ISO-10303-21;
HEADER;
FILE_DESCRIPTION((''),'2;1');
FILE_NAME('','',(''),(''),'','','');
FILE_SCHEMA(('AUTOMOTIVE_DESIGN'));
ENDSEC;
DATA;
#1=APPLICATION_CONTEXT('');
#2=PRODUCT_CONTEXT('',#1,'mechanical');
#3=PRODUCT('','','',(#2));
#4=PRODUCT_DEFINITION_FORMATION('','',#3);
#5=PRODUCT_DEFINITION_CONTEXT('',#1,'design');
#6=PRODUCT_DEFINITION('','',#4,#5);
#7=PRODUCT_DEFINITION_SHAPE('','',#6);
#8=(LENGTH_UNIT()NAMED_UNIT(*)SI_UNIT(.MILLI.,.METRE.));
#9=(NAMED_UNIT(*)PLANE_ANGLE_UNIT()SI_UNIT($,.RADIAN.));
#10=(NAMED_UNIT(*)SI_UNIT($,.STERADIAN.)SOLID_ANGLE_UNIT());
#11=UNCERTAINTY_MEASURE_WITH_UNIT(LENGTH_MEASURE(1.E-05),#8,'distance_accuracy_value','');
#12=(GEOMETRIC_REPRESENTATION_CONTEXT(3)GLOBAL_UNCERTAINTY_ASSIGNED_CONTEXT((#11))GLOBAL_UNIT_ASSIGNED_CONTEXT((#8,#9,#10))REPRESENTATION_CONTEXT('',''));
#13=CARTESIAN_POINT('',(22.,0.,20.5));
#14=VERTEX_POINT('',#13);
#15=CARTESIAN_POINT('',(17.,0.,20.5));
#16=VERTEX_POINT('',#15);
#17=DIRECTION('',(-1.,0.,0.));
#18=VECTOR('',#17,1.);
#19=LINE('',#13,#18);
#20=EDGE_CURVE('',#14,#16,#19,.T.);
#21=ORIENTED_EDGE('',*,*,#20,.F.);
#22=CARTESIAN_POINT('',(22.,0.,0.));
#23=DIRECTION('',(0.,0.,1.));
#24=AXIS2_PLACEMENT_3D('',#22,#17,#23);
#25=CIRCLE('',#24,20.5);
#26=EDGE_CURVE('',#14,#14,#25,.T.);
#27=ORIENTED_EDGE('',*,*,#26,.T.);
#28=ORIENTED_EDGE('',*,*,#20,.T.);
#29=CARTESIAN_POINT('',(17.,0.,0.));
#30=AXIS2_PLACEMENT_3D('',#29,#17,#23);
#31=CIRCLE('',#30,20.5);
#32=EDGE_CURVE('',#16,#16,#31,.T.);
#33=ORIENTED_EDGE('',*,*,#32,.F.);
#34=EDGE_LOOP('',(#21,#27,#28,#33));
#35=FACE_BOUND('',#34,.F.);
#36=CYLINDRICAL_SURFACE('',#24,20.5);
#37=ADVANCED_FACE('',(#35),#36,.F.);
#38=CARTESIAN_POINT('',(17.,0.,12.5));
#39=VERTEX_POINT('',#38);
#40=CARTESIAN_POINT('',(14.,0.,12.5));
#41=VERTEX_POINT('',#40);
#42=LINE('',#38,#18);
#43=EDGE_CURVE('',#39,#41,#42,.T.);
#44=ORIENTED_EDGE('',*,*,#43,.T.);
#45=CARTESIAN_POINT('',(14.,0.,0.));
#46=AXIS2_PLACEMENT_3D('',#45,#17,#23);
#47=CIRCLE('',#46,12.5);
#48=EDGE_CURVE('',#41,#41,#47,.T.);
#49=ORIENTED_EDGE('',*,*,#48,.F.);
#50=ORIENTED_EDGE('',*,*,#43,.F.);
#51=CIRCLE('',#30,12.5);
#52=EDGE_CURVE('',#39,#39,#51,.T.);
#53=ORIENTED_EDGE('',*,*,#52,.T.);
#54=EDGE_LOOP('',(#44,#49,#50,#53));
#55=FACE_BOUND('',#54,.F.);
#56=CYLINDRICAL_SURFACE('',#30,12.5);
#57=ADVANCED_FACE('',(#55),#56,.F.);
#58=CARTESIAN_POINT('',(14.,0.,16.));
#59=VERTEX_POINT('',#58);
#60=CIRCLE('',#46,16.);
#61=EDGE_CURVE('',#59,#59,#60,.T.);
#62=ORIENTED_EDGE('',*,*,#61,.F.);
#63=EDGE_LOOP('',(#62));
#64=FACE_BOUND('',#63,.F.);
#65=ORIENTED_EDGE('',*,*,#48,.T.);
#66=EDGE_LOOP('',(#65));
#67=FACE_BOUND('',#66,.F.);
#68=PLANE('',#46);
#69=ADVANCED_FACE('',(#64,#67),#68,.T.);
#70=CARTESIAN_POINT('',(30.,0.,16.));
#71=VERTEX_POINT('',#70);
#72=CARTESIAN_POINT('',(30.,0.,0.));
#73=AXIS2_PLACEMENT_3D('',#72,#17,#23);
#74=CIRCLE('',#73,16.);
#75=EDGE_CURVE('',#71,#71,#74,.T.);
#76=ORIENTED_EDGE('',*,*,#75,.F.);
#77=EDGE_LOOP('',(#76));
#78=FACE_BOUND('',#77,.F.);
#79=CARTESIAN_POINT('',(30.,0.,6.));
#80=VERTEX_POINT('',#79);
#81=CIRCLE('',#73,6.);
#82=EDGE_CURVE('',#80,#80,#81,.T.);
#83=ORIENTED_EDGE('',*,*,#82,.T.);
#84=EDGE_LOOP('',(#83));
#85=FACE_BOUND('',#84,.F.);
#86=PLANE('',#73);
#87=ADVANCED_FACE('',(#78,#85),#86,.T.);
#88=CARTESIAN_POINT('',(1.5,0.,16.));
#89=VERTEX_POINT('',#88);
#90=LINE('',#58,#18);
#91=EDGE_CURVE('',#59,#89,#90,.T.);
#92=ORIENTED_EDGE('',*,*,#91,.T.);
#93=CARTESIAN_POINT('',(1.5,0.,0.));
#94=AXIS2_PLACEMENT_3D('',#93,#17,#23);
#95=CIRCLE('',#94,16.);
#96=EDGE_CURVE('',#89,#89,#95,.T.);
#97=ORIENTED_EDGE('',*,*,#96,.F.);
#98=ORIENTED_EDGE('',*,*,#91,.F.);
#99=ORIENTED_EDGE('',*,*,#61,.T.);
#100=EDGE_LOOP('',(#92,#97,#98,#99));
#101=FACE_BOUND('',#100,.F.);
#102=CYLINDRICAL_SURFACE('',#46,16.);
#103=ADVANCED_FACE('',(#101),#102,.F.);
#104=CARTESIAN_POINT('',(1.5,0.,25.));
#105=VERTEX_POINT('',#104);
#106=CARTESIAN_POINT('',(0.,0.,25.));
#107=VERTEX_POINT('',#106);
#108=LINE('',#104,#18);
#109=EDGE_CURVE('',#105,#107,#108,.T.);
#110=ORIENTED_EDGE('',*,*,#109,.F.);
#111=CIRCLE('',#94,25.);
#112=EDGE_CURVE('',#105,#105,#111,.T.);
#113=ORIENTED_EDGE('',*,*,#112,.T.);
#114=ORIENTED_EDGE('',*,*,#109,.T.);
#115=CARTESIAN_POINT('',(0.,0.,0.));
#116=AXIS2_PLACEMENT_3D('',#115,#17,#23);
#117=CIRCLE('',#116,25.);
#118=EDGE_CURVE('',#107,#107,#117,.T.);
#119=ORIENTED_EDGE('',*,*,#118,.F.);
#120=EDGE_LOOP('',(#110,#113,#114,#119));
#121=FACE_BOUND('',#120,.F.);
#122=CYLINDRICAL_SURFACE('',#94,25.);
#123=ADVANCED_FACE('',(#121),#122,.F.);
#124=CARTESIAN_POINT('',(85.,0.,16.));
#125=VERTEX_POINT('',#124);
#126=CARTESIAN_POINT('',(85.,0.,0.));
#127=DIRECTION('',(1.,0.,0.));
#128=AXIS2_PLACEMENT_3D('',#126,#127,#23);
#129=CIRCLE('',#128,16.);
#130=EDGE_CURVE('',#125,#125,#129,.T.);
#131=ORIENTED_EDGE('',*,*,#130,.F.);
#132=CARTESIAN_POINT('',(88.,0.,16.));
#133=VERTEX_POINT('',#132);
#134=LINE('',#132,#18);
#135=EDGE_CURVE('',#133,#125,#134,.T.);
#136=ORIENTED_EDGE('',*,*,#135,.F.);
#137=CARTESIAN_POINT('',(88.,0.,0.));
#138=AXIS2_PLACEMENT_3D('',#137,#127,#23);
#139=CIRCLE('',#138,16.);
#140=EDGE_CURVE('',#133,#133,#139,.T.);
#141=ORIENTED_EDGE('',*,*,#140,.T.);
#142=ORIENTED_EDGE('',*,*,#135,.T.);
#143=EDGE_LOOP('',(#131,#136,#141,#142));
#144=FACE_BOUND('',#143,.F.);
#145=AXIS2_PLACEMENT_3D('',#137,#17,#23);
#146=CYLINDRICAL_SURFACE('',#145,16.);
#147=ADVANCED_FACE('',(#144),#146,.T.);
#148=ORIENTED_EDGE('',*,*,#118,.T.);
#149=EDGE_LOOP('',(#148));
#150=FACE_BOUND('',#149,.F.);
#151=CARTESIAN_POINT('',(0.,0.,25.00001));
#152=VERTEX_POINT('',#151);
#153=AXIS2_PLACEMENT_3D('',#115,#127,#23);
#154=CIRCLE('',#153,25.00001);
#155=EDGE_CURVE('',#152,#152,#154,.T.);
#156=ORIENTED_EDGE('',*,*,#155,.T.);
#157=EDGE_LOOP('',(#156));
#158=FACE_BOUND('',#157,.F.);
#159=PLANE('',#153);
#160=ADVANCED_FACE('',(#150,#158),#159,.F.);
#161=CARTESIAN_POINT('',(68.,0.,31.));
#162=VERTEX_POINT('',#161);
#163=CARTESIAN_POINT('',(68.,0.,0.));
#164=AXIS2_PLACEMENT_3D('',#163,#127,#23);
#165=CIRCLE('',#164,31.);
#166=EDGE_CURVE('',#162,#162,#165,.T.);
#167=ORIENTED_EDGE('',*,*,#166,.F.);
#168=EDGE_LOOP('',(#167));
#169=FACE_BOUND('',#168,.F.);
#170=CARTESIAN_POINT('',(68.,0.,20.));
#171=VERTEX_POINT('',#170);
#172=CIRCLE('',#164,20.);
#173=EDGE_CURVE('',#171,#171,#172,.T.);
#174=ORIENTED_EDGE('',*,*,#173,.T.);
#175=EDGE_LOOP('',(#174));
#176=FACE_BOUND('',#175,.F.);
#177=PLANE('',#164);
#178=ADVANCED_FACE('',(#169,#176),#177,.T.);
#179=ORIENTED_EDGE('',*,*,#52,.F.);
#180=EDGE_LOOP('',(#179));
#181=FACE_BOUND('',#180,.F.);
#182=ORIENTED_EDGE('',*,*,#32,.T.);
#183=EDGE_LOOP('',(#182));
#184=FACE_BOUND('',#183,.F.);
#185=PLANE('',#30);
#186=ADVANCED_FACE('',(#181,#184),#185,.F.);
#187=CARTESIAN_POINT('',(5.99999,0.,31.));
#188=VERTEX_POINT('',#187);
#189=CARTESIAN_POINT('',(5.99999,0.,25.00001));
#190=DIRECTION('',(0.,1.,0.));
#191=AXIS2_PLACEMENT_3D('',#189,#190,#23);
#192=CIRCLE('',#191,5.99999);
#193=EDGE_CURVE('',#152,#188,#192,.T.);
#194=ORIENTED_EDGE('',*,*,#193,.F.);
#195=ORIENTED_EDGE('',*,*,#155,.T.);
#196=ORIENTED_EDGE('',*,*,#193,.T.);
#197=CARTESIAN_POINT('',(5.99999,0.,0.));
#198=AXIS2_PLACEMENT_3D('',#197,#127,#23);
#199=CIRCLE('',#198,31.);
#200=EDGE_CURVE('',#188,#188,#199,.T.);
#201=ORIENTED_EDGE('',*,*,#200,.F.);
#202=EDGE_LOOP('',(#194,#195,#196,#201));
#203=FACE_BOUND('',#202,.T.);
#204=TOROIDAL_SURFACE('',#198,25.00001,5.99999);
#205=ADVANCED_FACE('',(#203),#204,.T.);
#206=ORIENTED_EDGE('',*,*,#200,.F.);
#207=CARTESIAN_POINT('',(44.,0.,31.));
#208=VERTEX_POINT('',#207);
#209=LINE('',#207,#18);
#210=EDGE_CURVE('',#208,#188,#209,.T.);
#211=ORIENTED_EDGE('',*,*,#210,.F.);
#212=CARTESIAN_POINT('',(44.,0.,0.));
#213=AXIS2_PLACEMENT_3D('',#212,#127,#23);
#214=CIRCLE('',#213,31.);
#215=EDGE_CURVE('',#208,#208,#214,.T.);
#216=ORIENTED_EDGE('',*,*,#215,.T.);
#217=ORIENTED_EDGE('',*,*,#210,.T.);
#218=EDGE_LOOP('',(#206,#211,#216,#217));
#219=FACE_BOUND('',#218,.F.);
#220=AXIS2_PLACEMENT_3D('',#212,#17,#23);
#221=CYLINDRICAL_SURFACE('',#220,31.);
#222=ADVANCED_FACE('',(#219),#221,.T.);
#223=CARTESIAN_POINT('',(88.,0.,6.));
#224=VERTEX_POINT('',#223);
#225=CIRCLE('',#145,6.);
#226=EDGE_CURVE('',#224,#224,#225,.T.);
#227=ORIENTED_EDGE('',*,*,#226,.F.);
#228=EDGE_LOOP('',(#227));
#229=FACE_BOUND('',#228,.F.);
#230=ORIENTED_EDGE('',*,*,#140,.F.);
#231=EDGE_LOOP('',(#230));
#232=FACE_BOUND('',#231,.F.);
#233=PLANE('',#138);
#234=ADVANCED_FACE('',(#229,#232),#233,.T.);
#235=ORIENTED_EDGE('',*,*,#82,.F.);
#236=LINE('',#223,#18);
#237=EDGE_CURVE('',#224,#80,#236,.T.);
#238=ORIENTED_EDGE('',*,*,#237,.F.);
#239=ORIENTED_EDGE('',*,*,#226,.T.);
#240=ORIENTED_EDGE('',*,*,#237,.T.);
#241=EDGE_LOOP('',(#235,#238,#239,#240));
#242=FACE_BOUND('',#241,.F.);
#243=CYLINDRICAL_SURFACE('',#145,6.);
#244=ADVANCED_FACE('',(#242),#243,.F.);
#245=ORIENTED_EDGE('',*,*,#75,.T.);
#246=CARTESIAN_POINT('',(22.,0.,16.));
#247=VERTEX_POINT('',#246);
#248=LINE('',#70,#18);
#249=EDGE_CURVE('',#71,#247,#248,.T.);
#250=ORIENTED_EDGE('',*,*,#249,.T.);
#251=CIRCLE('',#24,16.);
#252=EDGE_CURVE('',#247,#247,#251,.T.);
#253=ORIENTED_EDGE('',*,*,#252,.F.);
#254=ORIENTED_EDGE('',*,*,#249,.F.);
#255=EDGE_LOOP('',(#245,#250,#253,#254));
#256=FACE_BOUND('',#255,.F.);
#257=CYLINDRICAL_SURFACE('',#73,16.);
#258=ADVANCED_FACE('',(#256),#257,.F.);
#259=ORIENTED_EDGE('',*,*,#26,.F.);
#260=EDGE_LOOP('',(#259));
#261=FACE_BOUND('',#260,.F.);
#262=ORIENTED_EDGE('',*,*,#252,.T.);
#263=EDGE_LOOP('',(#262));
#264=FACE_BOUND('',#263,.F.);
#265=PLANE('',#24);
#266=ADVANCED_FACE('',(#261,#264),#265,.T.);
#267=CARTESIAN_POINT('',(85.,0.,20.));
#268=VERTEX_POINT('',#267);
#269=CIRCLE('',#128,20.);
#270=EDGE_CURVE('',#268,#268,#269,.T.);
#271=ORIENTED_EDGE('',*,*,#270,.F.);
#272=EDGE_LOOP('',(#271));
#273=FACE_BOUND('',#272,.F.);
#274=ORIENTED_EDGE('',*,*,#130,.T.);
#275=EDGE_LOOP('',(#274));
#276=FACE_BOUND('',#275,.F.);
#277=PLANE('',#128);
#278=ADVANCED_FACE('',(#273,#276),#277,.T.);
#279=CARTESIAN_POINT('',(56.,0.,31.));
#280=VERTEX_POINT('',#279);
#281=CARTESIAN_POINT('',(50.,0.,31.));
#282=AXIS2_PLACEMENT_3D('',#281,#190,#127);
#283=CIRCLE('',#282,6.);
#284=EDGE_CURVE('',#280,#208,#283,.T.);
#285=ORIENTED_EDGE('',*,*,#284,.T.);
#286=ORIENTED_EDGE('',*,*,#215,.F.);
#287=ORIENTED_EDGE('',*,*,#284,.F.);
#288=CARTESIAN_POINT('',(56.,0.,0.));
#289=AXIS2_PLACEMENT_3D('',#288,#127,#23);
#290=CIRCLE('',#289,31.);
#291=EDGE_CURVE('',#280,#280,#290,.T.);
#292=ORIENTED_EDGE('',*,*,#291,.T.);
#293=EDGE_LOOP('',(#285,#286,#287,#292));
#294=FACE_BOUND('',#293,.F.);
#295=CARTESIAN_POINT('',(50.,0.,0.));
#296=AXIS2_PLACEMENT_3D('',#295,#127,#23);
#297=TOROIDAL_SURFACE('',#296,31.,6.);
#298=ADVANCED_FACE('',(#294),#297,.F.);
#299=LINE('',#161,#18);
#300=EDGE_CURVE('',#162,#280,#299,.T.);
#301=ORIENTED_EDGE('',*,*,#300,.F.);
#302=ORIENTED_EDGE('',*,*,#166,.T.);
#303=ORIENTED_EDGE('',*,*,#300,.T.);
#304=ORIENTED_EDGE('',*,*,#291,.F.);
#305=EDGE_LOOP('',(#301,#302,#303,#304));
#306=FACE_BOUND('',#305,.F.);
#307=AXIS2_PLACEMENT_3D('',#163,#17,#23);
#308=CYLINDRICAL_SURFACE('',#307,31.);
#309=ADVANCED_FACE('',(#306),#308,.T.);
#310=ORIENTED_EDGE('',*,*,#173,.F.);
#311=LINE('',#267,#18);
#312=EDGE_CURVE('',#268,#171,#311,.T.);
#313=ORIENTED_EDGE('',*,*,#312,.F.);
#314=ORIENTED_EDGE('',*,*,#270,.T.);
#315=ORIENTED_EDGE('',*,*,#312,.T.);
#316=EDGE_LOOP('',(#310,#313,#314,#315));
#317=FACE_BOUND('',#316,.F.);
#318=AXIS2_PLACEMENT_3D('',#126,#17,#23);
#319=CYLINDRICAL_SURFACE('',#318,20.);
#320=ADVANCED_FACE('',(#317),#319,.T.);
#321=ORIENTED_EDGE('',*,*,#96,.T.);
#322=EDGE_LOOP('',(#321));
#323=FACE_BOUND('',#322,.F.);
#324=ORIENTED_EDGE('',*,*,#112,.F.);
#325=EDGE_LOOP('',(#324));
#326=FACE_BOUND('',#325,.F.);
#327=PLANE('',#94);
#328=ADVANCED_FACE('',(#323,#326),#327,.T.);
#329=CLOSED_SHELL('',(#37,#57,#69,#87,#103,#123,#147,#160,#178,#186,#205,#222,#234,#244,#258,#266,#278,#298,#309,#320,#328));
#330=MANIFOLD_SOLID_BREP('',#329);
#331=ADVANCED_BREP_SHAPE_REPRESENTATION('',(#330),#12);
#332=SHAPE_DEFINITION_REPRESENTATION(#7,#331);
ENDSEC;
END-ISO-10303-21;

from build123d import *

# Parameters (mm, degrees)
F4_R = 5.99999


# Not quite as in the source:
# - a fillet or chamfer is up to 0.001 mm smaller than in the source, because OpenCascade refuses the exact size


with BuildPart() as f1:
    # F0 (on Front) → F1 (revolve)
    with BuildSketch(Plane.XZ):
        with BuildLine():
            Line((0, 31), (0, 0))
            Line((0, 0), (88, 0))
            Line((88, 0), (88, 16))
            Line((88, 16), (85, 16))
            Line((85, 16), (85, 20))
            Line((85, 20), (68, 20))
            Line((68, 20), (68, 31))
            Line((68, 31), (56, 31))
            ThreePointArc((56, 31), (50, 25), (44, 31))
            Line((44, 31), (0, 31))
        make_face()
    revolve(axis=Axis((56.2561290468, 0, 0), (1, 0, 0)))

    # F2 (on Front) → F3 (revolve, cut)
    with BuildSketch(Plane.XZ):
        Polygon((0, 25), (0, 0), (88, 0), (88, 6), (30, 6), (30, 16), (22, 16), (22, 20.5), (17, 20.5), (17, 12.5), (14, 12.5), (14, 16), (1.5, 16), (1.5, 25), align=None)
    revolve(axis=Axis((-8.4188580513, 0, 0), (-1, 0, 0)), mode=Mode.SUBTRACT)

    # F4 (radius 6 in the source; OpenCascade refuses exactly that, so slightly less here)
    f4_edges = [f1.edges().sort_by_distance(p)[0] for p in [
        (0, 0, -31),
    ]]
    fillet(f4_edges, radius=F4_R)


solid = f1.part
